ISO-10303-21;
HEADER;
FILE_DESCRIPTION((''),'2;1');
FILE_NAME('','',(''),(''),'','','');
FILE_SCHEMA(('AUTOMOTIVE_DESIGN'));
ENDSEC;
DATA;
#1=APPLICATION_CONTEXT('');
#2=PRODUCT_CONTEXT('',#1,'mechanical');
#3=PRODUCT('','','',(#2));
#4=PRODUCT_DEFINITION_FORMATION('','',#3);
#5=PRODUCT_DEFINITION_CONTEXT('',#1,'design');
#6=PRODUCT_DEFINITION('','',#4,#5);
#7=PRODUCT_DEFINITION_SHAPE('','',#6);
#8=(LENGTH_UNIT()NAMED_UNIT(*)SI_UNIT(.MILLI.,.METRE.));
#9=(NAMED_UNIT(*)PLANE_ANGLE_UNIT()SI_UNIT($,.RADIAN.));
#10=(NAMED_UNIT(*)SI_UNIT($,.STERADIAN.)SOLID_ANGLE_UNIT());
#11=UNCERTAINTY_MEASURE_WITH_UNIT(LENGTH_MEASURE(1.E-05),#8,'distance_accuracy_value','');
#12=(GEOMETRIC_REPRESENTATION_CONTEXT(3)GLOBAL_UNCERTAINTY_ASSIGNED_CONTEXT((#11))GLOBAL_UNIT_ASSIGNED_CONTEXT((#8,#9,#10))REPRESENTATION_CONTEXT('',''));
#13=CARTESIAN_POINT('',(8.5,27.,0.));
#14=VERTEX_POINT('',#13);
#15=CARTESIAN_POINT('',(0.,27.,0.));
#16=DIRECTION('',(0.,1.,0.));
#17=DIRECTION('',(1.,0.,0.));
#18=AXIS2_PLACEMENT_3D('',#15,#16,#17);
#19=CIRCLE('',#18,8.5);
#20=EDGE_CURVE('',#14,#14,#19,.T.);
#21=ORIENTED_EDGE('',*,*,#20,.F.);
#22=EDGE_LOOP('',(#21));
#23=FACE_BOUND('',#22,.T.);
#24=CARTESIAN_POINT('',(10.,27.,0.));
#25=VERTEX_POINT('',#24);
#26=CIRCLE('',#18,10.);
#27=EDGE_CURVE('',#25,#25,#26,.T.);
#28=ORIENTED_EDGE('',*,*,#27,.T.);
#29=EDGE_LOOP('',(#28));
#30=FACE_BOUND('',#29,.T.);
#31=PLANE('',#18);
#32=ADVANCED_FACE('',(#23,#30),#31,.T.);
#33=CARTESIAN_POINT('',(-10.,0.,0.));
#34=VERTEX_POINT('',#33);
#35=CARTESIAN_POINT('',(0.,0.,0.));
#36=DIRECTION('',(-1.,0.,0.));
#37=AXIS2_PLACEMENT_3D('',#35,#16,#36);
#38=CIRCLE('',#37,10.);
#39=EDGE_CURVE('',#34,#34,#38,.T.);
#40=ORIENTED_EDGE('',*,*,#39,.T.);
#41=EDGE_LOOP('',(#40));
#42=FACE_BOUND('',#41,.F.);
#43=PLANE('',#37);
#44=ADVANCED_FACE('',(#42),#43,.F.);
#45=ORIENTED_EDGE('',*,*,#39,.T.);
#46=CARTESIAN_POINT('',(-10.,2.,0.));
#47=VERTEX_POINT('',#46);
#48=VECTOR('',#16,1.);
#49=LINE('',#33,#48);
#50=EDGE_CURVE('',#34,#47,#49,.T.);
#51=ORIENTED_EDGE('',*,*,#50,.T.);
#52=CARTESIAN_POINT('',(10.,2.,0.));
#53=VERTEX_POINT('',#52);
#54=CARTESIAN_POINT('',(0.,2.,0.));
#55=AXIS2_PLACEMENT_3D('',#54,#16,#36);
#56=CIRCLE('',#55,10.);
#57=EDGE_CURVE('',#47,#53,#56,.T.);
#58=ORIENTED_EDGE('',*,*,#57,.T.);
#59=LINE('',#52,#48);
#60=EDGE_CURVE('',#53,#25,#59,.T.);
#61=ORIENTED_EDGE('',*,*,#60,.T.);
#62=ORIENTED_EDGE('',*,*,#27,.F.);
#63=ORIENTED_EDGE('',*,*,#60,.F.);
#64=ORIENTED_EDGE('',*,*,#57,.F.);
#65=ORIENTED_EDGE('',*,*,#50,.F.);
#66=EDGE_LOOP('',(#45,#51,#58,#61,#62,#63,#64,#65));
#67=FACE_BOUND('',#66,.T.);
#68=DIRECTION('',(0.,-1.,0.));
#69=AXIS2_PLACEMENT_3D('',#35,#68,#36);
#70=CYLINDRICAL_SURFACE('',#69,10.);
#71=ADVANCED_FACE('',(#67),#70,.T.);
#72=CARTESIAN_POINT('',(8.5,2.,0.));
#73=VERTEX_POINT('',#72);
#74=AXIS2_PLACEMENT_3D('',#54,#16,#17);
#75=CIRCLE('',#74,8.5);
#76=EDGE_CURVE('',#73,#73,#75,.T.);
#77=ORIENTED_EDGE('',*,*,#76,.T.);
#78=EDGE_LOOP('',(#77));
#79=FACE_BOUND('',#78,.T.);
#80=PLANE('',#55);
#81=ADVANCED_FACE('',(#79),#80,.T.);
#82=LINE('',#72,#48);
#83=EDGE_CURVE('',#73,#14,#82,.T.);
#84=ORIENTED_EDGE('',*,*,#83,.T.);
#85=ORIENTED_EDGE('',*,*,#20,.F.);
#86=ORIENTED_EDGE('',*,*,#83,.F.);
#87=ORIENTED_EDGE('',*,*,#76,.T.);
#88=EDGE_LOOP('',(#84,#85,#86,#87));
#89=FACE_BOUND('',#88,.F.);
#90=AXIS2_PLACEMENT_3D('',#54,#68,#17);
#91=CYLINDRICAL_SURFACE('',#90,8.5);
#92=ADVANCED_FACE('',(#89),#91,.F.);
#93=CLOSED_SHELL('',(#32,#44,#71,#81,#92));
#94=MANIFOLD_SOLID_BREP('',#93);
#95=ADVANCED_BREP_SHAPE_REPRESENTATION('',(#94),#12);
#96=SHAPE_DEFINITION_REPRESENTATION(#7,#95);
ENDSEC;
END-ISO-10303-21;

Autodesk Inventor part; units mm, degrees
ref_plane "YZ Plane" through (0, 0, 0) normal (1, 0, 0) x (0, 1, 0)
ref_plane "XZ Plane" through (0, 0, 0) normal (0, 1, 0) x (-1, 0, 0)
ref_plane "XY Plane" through (0, 0, 0) normal (0, 0, 1) x (1, 0, 0)
sketch "Esquisse1" plane through (0, 0, 0) normal (0, 1, 0) x (-1, 0, 0)
  point P0 (0, 0)
sketch "Esquisse2" plane through (0, 0, 0) normal (0, 1, 0) x (-1, 0, 0)
  circle A0 centre (0, 0) radius 10
  dimension "d0" = 20
extrude "Extrusion1" add sketch "Esquisse2" along normal blind 2
sketch "Esquisse3" plane through (0, 2, 0) normal (0, 1, 0) x (1, 0, 0)
  circle A0 centre (0, 0) radius 8.5
  circle A1 centre (0, 0) radius 10
  dimension "d3" = 17
extrude "Extrusion2" add sketch "Esquisse3" along normal blind 25
properties part number "Plateau decomp"
